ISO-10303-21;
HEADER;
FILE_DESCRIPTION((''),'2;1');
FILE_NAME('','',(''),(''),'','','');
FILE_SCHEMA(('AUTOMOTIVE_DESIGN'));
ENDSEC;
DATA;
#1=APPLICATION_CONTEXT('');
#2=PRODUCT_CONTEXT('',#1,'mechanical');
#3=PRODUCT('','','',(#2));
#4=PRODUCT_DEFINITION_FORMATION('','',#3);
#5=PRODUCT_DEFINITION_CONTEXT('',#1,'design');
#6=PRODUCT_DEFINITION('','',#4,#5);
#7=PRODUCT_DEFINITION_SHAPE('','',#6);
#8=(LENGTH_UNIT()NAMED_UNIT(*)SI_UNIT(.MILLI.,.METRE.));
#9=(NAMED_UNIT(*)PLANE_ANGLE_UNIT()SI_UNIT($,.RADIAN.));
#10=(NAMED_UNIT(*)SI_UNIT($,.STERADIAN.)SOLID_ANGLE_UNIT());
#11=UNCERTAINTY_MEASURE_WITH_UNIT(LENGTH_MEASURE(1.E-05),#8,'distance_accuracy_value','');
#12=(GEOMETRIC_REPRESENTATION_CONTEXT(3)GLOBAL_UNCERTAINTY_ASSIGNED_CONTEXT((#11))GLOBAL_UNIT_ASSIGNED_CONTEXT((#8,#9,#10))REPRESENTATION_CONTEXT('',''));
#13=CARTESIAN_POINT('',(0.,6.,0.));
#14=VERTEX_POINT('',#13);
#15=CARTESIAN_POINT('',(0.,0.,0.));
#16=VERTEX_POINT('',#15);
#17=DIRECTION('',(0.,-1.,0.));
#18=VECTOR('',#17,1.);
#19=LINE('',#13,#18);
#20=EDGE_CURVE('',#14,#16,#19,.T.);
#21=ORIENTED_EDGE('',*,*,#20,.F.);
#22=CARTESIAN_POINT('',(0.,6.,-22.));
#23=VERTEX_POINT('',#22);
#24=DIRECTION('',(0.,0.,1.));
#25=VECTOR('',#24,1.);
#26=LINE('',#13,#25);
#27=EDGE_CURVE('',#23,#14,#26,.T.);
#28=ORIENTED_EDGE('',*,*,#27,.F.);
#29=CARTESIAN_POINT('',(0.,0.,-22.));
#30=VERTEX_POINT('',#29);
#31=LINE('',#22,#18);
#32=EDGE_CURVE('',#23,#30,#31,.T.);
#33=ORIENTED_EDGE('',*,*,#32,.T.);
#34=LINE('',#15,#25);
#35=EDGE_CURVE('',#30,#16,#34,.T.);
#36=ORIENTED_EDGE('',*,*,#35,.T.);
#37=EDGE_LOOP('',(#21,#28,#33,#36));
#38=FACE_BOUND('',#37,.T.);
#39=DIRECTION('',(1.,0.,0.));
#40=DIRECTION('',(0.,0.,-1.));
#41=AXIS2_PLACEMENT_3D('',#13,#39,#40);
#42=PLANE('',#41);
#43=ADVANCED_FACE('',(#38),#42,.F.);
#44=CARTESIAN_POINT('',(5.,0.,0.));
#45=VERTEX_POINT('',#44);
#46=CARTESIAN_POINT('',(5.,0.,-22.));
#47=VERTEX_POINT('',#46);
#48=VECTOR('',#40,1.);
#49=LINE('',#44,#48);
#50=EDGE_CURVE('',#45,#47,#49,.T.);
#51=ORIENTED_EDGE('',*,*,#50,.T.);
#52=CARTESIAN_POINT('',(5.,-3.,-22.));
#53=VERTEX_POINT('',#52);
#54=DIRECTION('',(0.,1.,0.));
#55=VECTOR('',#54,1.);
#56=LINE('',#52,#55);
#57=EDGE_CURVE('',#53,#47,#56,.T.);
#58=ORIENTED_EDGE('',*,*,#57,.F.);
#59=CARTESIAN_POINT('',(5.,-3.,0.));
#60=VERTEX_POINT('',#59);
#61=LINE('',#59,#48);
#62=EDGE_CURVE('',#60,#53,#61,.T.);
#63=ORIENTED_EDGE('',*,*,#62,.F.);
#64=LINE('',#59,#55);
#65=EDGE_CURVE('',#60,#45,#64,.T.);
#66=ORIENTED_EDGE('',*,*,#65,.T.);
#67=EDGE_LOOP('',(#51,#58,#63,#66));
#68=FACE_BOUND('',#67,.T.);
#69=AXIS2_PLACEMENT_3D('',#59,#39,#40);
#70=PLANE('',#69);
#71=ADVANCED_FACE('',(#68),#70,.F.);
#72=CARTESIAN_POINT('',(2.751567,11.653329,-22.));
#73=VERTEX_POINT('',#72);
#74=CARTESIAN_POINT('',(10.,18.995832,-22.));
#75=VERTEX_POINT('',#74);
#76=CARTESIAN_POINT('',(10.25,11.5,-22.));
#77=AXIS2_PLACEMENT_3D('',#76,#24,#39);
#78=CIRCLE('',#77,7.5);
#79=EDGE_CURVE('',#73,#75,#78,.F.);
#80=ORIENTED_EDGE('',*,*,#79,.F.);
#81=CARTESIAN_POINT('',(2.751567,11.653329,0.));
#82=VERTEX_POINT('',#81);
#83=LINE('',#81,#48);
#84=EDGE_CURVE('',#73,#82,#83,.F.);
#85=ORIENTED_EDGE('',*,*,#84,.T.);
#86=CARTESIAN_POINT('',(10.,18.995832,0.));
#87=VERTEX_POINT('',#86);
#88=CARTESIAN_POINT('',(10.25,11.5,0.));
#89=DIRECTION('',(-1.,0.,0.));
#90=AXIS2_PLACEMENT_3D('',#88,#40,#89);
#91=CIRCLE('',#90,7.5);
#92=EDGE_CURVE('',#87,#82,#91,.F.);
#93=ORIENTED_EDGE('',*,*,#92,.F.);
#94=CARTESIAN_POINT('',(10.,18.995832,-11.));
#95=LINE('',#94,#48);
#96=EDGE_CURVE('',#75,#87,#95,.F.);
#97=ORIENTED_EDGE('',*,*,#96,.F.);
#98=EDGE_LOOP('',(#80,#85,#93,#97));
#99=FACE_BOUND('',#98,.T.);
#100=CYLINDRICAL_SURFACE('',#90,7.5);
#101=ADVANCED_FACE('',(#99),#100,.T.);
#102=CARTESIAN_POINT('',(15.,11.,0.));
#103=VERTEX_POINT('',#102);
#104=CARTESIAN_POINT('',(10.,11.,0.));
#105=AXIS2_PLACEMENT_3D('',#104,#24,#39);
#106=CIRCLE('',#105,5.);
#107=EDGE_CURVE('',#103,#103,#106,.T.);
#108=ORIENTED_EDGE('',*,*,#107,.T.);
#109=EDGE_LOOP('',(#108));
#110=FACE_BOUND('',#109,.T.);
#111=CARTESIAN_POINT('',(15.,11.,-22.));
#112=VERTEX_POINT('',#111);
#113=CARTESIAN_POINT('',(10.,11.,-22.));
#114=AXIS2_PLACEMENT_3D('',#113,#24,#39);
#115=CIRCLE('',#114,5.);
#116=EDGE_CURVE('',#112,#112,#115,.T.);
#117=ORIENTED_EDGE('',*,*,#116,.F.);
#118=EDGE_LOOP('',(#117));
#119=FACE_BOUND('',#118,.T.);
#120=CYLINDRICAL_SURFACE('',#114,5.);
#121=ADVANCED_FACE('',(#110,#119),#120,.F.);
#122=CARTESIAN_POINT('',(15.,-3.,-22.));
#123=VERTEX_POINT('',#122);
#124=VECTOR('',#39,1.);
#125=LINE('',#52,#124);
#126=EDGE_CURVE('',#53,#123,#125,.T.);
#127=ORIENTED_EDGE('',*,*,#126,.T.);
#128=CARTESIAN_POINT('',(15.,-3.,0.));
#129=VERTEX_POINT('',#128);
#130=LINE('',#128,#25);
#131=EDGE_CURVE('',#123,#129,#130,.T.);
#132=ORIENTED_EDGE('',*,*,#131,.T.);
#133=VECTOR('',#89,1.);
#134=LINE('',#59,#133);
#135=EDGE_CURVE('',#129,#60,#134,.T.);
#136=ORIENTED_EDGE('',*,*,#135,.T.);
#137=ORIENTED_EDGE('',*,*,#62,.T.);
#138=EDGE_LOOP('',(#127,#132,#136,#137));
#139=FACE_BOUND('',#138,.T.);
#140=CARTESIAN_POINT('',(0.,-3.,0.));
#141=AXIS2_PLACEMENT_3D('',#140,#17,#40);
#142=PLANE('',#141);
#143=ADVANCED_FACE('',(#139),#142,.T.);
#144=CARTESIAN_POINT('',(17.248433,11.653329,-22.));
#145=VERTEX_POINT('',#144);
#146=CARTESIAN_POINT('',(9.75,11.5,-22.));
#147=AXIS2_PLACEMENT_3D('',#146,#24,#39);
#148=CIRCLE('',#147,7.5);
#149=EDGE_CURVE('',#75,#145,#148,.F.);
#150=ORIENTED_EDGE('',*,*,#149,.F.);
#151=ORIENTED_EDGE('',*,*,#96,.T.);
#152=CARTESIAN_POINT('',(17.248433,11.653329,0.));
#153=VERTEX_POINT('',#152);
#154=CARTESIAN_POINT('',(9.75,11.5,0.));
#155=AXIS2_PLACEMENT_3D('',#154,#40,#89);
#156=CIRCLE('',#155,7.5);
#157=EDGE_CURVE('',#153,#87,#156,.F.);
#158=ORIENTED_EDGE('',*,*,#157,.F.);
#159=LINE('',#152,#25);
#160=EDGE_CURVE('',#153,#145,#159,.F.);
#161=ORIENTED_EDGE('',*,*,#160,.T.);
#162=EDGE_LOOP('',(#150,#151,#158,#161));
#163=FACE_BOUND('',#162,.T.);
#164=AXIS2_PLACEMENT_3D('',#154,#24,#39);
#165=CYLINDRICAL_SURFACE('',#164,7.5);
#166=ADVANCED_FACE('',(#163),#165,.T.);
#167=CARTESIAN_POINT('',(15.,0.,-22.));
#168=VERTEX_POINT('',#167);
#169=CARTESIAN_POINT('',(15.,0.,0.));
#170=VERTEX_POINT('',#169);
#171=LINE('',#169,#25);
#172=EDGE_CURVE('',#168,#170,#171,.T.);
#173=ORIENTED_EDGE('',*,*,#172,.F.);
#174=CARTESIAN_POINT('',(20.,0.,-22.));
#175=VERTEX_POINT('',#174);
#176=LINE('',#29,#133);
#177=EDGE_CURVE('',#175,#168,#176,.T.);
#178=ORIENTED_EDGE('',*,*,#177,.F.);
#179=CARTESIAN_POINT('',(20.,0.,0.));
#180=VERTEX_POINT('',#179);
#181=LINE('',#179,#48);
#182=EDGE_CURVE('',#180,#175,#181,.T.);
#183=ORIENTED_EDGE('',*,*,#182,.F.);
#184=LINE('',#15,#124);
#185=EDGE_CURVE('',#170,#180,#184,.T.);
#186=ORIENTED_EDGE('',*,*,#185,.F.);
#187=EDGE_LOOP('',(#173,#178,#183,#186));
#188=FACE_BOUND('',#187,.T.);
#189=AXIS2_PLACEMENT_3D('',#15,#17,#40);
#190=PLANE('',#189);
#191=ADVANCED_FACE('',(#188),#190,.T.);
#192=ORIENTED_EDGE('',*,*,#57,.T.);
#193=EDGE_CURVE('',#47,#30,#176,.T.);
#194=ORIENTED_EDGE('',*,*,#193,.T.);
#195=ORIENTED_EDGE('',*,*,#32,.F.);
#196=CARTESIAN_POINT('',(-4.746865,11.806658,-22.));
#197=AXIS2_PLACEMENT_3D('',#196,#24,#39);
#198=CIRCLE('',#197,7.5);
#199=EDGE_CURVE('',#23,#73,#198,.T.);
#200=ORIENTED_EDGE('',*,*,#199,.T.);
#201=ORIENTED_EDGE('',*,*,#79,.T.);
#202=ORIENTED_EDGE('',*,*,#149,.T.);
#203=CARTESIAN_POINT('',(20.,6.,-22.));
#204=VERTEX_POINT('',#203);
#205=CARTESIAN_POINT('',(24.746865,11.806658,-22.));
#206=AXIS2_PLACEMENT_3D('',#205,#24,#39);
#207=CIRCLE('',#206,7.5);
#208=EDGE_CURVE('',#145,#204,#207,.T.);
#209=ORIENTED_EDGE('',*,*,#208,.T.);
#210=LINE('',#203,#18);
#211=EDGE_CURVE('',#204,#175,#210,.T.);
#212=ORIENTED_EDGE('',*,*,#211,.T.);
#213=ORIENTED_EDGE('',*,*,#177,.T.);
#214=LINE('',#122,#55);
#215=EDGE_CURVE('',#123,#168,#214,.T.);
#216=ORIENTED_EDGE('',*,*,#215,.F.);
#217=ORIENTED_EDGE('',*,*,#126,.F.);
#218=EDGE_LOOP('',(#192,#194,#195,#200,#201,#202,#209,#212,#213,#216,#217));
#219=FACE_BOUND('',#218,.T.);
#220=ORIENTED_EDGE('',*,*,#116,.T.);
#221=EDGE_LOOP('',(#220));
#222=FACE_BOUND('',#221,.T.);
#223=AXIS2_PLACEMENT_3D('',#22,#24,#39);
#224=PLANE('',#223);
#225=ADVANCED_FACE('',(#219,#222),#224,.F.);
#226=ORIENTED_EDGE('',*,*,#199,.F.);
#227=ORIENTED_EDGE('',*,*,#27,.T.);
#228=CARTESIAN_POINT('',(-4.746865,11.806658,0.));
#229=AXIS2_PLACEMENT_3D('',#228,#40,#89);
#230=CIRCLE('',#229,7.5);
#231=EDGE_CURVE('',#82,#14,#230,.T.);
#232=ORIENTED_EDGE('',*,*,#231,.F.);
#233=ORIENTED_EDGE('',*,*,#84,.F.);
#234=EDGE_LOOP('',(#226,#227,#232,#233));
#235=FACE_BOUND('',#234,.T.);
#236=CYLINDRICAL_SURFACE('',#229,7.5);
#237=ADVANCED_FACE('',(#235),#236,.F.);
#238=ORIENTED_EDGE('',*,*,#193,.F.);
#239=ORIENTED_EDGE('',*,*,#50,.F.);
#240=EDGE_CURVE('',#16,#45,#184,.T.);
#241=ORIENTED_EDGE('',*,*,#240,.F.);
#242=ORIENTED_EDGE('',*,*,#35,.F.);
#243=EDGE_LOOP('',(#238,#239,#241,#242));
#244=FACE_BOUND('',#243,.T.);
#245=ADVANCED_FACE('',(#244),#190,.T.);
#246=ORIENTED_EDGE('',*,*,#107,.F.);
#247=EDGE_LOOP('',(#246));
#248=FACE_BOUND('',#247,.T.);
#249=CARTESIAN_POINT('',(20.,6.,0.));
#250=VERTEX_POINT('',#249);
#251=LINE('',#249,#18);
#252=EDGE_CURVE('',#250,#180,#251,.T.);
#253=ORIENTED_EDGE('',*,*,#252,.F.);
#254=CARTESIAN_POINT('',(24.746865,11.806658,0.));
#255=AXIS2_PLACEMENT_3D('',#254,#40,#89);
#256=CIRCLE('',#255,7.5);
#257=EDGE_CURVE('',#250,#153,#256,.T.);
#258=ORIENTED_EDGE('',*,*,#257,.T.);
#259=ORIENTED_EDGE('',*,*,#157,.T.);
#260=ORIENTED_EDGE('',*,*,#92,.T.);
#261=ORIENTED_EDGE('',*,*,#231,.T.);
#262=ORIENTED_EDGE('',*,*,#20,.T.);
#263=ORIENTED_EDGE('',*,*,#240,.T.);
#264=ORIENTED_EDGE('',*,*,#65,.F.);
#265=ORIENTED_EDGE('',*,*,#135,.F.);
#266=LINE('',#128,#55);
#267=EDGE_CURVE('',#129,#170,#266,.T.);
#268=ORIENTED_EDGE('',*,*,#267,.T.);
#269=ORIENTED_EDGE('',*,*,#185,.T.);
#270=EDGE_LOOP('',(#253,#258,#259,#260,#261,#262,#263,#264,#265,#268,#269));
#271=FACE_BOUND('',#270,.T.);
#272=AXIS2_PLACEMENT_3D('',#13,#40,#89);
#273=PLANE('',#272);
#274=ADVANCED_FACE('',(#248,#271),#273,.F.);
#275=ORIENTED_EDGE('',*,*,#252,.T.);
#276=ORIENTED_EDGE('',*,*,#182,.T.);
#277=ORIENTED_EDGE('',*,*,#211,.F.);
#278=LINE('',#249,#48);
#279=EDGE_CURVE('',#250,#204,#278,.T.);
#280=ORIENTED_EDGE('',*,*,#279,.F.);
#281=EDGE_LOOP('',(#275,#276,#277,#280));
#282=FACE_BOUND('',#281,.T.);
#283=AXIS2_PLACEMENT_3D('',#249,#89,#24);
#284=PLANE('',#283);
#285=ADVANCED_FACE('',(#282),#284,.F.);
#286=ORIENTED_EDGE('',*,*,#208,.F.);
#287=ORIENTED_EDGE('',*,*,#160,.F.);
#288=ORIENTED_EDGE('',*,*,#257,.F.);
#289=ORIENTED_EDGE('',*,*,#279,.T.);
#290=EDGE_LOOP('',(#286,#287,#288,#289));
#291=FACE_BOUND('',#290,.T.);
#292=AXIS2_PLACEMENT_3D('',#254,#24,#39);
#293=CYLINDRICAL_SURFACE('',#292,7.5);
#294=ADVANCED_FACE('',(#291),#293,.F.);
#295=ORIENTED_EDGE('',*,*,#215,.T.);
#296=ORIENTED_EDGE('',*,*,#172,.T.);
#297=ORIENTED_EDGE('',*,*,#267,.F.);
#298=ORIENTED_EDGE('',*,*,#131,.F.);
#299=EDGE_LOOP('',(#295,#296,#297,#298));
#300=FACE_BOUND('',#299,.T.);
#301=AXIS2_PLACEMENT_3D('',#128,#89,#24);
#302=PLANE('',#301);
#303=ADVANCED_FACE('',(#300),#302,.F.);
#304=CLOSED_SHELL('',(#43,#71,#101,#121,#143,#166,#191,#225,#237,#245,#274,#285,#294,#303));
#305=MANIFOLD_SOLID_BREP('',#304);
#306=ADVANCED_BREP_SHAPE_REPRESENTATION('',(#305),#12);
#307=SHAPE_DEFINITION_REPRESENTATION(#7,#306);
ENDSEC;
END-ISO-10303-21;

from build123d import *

# Parameters (mm, degrees)
SKETCH6_W           = 20
SKETCH6_H           = 22
BOSS_EXTRUDE5_DEPTH = 6
SKETCH7_W           = 10
SKETCH7_H           = 22
BOSS_EXTRUDE6_DEPTH = 3
SKETCH8_W           = 14.5
SKETCH8_H           = 22
BOSS_EXTRUDE7_DEPTH = 13
SKETCH9_R           = 5
CUT_EXTRUDE1_DEPTH  = 36.284557529
FILLET1_R           = 7.5
FILLET2_R           = 7.5


with BuildPart() as part:
    # Sketch6 → Boss-Extrude5 (new body)
    with BuildSketch(Plane(origin=(0, 0, 0), x_dir=(1, 0, 0), z_dir=(0, 1, 0))):
        with Locations((10, 11)):
            Rectangle(SKETCH6_W, SKETCH6_H)
    extrude(amount=BOSS_EXTRUDE5_DEPTH)

    # Sketch7 → Boss-Extrude6 (add)
    with BuildSketch(Plane.XZ):
        with Locations((10, -11)):
            Rectangle(SKETCH7_W, SKETCH7_H)
    extrude(amount=BOSS_EXTRUDE6_DEPTH)

    # Sketch8 → Boss-Extrude7 (add)
    with BuildSketch(Plane(origin=(0, 6, 0), x_dir=(1, 0, 0), z_dir=(0, 1, 0))):
        with Locations((10, 11)):
            Rectangle(SKETCH8_W, SKETCH8_H)
    extrude(amount=BOSS_EXTRUDE7_DEPTH)

    # Sketch9 → Cut-Extrude1 (cut, through all)
    with BuildSketch(Plane.XY):
        with Locations((10, 11)):
            Circle(SKETCH9_R)
    extrude(amount=-CUT_EXTRUDE1_DEPTH, mode=Mode.SUBTRACT)

    # Fillet1
    # the kernel refuses this fillet: 7.5 mm, written as the material it takes off along each edge
    with BuildSketch(Plane(origin=(17.25, 19, -40.75), x_dir=(-1, 0, 0), z_dir=(0, 0, 1))) as fillet1_piece_1:
        with BuildLine():
            CenterArc((FILLET1_R, FILLET1_R), FILLET1_R, 180, 90)
            Line((0, FILLET1_R), (0, 0))
            Line((0, 0), (FILLET1_R, 0))
        make_face()
    extrude(amount=59.5, mode=Mode.SUBTRACT)
    with BuildSketch(Plane(origin=(2.75, 19, 18.75), x_dir=(0, -1, 0), z_dir=(0, 0, -1))) as fillet1_piece_2:
        with BuildLine():
            CenterArc((FILLET1_R, -FILLET1_R), FILLET1_R, 90, 90)
            Line((0, -FILLET1_R), (0, 0))
            Line((0, 0), (FILLET1_R, 0))
        make_face()
    extrude(amount=59.5, mode=Mode.SUBTRACT)

    # Fillet2
    # the kernel refuses this fillet: 7.5 mm, written as the material it adds along each edge
    with BuildSketch(Plane(origin=(17.25, 6, -22), x_dir=(1, 0, 0), z_dir=(0, 0, 1))) as fillet2_piece_1:
        with BuildLine():
            CenterArc((7.496865043, 5.806657581), FILLET2_R, 181.171427285, 49.563032728)
            Line((-0.001567478, 5.65332879), (-0.75141073, 5.637995911))
            ThreePointArc((-0.75141073, 5.637995911), (-0.75, 5.5), (-0.75, 0))
            Line((-0.75, 0), (0, -0.75))
            ThreePointArc((0, -0.75), (1.375, -0.75), (2.275313496, -0.580665758))
            Line((2.275313496, -0.580665758), (2.75, 0))
        make_face()
    extrude(amount=22)
    with BuildSketch(Plane(origin=(2.75, 6, 0), x_dir=(0.00027726642617420565, 0.9999999615616638, 0), z_dir=(0, 0, -1))) as fillet2_piece_2:
        with BuildLine():
            CenterArc((5.804578729, -7.498474746), FILLET2_R, 91.155541089, 49.563032728)
            Line((-0.000762483, -2.749999894), (-0.581296604, -2.275152409))
            ThreePointArc((-0.581296604, -2.275152409), (-0.750381213, -1.374791997), (-0.749999971, 0.00020795))
            Line((-0.749999971, 0.00020795), (0.00020795, 0.749999971))
            ThreePointArc((0.00020795, 0.749999971), (5.500207738, 0.748475006), (5.638204036, 0.749847475))
            Line((5.638204036, 0.749847475), (5.653329008, 0))
        make_face()
    extrude(amount=22)


solid = part.part
